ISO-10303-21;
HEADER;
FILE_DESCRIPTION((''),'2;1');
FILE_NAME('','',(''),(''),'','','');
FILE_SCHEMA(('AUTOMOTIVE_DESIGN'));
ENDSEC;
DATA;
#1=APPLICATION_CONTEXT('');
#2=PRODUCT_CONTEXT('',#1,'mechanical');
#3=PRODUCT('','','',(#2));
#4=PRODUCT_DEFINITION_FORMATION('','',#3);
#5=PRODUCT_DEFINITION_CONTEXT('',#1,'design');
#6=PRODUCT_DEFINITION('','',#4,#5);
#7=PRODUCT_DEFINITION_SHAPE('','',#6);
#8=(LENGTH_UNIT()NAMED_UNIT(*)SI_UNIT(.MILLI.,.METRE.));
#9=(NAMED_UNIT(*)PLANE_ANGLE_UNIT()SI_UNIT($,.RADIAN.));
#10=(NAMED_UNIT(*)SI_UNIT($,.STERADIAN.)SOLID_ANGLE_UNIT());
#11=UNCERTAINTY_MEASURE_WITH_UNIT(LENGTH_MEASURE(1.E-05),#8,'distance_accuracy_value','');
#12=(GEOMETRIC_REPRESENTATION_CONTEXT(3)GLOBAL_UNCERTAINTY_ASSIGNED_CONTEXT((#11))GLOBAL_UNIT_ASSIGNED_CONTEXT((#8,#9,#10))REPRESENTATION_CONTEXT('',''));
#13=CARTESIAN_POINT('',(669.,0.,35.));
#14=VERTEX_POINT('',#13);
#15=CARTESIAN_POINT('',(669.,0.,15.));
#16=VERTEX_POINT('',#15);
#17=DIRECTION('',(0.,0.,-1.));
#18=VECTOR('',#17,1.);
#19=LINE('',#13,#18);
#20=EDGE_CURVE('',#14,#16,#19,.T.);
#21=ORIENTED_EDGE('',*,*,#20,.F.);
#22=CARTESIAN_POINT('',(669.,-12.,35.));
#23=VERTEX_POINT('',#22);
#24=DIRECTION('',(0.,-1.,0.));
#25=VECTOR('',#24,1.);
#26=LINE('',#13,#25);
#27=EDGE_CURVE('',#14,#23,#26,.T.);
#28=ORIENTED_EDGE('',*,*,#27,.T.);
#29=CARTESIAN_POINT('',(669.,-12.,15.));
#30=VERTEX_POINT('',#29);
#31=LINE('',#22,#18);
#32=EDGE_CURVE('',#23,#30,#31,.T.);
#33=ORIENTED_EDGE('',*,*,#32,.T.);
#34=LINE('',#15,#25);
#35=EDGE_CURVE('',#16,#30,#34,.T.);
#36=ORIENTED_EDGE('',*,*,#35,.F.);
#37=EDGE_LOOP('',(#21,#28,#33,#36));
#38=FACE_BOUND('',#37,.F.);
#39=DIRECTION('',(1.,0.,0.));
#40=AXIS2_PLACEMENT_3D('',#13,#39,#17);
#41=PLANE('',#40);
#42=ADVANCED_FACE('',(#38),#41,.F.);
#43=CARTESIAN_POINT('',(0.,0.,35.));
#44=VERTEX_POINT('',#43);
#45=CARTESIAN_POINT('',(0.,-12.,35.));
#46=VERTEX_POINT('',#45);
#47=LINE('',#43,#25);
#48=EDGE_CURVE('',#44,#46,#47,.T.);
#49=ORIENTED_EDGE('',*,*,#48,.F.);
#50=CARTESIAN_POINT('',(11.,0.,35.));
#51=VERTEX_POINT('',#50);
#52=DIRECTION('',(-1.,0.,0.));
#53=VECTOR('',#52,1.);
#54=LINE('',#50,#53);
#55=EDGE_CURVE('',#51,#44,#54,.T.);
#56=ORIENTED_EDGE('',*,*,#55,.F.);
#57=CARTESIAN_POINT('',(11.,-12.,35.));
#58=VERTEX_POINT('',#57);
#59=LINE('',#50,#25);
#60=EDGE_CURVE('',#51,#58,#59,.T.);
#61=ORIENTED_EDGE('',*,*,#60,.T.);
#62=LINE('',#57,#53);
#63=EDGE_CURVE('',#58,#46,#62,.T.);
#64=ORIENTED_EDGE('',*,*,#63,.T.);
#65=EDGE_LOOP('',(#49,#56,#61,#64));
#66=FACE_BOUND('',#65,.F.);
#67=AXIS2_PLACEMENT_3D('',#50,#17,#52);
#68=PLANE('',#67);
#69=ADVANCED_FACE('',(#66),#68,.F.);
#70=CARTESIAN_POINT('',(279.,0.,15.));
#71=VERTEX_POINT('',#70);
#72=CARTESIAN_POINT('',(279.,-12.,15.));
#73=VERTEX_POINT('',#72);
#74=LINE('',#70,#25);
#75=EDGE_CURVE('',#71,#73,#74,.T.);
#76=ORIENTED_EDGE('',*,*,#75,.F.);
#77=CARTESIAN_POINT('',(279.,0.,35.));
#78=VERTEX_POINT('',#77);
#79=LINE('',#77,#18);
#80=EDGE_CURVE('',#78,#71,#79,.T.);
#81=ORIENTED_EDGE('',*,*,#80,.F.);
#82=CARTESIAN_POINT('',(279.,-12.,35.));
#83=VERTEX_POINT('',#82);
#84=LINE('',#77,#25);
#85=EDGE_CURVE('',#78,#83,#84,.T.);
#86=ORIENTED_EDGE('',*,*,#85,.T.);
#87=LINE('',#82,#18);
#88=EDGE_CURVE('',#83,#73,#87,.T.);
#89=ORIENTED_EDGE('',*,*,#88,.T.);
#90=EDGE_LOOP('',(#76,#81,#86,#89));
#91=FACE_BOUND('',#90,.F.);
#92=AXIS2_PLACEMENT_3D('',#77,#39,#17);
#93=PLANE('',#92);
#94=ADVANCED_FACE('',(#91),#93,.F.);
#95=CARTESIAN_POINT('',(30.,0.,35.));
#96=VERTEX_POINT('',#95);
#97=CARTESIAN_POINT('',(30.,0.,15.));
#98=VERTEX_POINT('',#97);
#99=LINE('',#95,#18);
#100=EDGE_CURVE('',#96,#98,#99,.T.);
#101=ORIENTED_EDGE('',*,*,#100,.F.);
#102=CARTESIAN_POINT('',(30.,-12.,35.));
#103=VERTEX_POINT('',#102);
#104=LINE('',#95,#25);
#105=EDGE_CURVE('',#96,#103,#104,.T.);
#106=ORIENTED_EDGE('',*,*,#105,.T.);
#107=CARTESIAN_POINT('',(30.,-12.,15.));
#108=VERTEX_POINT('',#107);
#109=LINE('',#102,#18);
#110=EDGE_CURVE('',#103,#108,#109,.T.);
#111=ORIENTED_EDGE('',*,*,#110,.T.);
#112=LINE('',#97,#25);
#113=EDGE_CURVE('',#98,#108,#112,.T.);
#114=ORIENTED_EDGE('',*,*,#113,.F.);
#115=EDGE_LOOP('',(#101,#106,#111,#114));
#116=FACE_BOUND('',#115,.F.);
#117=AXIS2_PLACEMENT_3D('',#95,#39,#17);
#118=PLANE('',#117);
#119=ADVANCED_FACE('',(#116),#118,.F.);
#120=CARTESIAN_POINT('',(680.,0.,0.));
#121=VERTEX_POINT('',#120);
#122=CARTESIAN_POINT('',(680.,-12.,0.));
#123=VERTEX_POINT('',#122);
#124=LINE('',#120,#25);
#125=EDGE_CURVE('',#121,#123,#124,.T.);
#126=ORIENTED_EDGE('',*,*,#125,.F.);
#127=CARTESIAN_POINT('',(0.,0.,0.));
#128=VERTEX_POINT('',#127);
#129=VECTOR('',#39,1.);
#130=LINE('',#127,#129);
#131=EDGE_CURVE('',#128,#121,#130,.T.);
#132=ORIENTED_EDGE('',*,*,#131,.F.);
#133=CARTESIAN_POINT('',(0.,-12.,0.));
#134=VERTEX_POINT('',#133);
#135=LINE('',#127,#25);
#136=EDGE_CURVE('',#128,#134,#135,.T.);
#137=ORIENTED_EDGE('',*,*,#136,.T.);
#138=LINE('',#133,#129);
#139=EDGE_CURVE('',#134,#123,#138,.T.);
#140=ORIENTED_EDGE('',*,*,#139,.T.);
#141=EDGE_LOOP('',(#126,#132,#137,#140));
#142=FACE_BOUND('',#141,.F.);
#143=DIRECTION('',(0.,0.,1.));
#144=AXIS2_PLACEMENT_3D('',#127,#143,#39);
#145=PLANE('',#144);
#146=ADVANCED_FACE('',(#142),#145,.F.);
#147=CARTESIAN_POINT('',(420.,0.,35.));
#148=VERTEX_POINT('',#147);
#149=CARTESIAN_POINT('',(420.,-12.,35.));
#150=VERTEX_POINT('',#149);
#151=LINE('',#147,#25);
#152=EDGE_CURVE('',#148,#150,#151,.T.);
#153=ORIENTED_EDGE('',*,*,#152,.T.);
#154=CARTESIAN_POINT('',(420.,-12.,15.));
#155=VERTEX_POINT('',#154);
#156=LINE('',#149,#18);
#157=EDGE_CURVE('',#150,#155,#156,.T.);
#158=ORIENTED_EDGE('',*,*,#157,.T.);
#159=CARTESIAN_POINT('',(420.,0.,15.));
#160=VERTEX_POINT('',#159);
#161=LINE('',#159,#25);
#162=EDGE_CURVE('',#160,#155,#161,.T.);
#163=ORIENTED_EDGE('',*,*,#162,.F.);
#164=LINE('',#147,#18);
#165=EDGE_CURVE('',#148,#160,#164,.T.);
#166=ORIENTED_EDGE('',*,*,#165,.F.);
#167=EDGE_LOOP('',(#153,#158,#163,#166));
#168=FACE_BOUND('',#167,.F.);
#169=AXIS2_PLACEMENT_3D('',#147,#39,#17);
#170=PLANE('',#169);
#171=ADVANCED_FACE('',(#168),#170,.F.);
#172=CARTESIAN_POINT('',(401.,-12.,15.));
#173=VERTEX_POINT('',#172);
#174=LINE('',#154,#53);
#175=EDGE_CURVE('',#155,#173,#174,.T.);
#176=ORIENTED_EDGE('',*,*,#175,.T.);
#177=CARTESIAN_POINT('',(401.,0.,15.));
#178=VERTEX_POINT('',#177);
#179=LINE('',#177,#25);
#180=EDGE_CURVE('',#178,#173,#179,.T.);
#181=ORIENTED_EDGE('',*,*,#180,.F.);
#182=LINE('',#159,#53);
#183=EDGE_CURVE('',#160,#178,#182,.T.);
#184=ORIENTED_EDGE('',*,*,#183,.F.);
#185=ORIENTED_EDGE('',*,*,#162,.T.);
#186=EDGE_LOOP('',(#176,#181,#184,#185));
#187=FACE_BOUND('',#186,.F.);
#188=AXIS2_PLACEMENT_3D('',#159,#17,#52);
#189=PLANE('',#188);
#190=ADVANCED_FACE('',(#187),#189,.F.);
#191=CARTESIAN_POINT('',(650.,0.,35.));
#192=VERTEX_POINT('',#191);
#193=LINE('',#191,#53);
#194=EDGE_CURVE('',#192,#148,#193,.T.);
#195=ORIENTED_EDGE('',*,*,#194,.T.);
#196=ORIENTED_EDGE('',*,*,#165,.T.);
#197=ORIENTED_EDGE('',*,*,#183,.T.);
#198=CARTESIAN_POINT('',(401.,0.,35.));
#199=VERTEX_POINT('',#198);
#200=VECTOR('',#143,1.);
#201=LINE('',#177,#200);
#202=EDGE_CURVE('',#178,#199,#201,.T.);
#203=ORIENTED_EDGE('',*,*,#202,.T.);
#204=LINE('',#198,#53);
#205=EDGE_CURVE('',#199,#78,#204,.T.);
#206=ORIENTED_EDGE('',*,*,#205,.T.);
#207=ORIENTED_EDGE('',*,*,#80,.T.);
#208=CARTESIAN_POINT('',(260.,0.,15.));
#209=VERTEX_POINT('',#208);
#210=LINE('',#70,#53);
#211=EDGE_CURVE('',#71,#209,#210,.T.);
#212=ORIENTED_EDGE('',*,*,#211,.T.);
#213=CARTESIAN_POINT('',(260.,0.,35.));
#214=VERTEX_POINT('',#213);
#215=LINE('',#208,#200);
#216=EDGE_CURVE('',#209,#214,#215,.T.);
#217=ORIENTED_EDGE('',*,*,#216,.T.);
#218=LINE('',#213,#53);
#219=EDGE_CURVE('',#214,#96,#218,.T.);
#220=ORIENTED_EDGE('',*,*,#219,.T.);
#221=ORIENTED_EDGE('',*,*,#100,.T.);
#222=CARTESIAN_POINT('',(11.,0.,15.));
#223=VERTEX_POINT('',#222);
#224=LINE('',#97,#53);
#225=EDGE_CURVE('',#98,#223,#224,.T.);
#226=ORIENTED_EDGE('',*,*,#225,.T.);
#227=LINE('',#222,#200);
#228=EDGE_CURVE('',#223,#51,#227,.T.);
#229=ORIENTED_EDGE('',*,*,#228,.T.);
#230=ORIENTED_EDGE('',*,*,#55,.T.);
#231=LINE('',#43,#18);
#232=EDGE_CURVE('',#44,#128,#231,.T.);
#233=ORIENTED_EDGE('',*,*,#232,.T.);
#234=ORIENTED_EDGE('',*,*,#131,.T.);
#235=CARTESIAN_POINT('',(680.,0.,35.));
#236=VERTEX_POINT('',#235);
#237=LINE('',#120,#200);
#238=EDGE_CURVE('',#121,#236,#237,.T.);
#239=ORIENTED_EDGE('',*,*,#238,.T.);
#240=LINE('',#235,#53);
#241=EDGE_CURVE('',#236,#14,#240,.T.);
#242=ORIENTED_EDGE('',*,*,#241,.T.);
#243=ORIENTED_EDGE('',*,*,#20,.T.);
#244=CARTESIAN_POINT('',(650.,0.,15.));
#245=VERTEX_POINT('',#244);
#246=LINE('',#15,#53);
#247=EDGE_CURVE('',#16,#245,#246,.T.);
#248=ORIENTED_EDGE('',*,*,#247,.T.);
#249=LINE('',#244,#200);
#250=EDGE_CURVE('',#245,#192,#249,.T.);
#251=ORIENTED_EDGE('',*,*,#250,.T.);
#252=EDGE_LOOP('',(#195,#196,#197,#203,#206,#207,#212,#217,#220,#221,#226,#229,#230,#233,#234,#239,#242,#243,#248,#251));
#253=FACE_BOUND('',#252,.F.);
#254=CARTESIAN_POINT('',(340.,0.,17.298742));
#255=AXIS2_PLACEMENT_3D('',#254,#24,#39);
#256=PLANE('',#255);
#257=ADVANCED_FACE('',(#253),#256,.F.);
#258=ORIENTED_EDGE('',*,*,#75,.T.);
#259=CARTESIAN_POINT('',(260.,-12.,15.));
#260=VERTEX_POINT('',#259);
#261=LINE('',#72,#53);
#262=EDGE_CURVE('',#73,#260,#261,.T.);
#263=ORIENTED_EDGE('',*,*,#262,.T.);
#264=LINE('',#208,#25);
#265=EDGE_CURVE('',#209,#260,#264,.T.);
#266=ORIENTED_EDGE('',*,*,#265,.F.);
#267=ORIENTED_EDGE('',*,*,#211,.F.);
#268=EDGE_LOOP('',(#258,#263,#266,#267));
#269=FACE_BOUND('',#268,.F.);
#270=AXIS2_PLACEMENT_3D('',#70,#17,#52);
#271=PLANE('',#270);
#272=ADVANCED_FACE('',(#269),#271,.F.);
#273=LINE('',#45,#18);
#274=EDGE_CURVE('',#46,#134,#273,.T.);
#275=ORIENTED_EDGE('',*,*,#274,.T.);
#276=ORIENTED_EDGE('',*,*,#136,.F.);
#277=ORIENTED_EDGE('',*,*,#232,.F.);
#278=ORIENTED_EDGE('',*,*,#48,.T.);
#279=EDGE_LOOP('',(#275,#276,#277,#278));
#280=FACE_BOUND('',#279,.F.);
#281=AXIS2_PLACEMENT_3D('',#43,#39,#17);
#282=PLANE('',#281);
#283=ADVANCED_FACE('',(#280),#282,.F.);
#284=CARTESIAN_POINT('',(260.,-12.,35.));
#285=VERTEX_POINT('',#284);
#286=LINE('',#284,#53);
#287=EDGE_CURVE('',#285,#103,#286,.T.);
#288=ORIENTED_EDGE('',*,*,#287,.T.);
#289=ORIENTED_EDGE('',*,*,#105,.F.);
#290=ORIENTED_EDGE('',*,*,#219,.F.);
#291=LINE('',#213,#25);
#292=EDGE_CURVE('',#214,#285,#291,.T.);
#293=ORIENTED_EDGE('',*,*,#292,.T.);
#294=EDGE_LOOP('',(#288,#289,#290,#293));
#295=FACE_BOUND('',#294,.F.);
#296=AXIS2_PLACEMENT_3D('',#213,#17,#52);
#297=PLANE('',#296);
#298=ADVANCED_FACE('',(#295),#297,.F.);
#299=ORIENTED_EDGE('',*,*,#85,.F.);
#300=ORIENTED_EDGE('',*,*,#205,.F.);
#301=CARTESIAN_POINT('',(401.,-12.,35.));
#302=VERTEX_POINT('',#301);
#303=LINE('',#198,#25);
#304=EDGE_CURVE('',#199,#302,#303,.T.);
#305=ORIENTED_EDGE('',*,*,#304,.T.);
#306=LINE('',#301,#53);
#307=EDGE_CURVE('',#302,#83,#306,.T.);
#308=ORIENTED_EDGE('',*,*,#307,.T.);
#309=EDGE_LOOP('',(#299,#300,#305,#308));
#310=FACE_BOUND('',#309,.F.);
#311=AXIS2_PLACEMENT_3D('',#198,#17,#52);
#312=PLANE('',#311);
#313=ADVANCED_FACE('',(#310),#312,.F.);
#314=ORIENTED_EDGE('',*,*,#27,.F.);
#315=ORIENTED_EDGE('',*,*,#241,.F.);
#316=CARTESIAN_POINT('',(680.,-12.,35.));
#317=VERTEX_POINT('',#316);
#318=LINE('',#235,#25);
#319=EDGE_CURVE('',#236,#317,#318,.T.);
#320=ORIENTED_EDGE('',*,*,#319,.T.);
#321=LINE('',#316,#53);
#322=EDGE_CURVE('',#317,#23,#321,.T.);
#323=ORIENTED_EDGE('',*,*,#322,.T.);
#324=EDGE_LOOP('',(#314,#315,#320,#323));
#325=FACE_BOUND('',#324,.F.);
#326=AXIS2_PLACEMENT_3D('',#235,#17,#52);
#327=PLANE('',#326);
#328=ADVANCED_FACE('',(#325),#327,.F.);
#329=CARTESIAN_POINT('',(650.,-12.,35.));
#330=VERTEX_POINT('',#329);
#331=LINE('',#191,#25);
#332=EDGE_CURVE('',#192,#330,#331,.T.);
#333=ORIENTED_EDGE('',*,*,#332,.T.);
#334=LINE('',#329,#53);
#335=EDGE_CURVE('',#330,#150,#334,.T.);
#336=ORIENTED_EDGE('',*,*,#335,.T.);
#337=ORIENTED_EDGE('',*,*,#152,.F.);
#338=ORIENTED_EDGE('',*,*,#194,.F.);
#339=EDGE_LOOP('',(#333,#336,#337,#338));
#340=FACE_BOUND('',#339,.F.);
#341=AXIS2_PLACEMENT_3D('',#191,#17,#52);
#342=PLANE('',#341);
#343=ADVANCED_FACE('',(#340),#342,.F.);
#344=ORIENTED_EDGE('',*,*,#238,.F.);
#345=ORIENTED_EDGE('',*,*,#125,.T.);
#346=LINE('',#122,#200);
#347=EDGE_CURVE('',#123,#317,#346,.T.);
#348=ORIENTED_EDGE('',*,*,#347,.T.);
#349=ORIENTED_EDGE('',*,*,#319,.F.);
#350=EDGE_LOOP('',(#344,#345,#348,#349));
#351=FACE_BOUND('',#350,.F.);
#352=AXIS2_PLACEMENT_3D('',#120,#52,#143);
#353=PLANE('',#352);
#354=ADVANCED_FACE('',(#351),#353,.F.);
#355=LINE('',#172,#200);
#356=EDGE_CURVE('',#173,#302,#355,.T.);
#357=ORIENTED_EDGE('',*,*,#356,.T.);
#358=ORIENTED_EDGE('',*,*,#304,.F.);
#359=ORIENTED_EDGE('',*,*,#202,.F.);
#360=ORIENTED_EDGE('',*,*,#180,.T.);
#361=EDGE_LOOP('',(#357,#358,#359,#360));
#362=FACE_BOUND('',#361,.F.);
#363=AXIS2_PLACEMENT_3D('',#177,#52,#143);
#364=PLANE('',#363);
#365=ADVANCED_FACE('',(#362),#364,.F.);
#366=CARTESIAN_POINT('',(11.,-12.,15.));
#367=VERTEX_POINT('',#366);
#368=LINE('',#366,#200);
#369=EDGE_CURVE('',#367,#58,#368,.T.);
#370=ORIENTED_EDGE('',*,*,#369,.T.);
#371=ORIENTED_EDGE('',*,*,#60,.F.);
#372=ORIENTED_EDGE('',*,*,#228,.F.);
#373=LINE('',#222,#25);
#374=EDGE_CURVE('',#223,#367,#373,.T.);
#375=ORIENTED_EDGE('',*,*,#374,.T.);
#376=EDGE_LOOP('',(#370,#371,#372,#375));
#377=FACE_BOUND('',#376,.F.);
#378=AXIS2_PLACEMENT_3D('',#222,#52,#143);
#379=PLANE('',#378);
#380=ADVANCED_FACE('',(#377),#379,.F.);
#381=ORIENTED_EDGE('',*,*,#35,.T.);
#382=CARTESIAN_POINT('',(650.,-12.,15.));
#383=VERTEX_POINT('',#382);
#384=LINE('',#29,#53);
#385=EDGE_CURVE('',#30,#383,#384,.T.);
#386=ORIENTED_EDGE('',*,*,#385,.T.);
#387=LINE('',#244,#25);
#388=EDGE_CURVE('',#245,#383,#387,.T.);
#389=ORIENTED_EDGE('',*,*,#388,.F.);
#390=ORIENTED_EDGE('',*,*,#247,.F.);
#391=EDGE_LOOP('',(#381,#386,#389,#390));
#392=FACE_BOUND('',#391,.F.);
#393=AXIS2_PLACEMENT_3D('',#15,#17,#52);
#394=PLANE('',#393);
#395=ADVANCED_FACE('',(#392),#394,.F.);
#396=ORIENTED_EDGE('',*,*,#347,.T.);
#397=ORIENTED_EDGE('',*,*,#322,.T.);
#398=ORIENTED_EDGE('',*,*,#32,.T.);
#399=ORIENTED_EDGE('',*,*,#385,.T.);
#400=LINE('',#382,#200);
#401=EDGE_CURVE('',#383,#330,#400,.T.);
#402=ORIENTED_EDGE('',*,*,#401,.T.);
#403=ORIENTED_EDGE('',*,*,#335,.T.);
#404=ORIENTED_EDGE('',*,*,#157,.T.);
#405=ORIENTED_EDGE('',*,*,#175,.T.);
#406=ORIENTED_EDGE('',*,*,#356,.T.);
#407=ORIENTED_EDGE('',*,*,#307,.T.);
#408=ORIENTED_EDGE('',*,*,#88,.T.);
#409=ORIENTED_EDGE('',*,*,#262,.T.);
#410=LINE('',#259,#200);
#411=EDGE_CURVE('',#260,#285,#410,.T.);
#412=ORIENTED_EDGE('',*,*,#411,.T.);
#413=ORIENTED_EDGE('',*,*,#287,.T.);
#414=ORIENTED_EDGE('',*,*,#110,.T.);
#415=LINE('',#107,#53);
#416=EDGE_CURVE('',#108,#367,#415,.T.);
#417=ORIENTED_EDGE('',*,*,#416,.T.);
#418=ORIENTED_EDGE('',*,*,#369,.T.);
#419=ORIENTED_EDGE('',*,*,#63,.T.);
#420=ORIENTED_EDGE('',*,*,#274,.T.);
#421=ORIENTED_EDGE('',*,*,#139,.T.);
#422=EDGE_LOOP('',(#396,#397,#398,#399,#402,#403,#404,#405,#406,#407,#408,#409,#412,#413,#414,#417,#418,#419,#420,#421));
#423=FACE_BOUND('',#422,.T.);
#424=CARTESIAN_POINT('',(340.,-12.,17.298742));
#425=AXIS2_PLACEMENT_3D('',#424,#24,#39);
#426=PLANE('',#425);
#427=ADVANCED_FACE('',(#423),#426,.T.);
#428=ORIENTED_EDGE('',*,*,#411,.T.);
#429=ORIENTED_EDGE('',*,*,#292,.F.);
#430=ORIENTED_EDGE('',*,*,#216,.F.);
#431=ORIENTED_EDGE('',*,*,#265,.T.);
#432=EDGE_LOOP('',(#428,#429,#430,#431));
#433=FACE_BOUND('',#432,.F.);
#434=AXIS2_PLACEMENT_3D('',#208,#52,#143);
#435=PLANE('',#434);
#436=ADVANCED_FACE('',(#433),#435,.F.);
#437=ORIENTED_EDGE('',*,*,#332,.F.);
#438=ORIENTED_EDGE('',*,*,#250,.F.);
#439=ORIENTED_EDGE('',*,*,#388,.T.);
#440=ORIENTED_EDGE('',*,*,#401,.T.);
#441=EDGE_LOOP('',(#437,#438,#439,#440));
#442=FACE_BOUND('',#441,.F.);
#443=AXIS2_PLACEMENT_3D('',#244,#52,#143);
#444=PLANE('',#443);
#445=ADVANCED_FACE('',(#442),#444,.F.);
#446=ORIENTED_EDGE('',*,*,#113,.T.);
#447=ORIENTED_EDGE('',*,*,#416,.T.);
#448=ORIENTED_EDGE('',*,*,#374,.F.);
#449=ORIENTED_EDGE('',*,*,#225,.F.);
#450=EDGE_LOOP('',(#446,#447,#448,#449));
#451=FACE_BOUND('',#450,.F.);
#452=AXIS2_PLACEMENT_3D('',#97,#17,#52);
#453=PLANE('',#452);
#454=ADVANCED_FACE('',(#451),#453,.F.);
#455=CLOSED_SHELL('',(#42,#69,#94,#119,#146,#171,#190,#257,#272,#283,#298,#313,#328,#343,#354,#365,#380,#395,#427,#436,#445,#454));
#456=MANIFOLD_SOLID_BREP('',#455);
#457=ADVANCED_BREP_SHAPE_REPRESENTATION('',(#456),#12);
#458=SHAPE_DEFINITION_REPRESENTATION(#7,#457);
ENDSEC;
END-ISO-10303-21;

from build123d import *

# Parameters (mm, degrees)
F1_DEPTH = 12


# Not quite as in the source:
# - a feature names something its author has since deleted; it is built from what else it names


with BuildPart() as f1:
    # F0 (on Front) → F1 (new body)
    with BuildSketch(Plane.XZ):
        Polygon((0, 35), (0, 0), (680, 0), (680, 35), (669, 35), (669, 15), (650, 15), (650, 35), (420, 35), (420, 15), (401, 15), (401, 35), (279, 35), (279, 15), (260, 15), (260, 35), (30, 35), (30, 15), (11, 15), (11, 35), align=None)
    extrude(amount=F1_DEPTH)


solid = f1.part
